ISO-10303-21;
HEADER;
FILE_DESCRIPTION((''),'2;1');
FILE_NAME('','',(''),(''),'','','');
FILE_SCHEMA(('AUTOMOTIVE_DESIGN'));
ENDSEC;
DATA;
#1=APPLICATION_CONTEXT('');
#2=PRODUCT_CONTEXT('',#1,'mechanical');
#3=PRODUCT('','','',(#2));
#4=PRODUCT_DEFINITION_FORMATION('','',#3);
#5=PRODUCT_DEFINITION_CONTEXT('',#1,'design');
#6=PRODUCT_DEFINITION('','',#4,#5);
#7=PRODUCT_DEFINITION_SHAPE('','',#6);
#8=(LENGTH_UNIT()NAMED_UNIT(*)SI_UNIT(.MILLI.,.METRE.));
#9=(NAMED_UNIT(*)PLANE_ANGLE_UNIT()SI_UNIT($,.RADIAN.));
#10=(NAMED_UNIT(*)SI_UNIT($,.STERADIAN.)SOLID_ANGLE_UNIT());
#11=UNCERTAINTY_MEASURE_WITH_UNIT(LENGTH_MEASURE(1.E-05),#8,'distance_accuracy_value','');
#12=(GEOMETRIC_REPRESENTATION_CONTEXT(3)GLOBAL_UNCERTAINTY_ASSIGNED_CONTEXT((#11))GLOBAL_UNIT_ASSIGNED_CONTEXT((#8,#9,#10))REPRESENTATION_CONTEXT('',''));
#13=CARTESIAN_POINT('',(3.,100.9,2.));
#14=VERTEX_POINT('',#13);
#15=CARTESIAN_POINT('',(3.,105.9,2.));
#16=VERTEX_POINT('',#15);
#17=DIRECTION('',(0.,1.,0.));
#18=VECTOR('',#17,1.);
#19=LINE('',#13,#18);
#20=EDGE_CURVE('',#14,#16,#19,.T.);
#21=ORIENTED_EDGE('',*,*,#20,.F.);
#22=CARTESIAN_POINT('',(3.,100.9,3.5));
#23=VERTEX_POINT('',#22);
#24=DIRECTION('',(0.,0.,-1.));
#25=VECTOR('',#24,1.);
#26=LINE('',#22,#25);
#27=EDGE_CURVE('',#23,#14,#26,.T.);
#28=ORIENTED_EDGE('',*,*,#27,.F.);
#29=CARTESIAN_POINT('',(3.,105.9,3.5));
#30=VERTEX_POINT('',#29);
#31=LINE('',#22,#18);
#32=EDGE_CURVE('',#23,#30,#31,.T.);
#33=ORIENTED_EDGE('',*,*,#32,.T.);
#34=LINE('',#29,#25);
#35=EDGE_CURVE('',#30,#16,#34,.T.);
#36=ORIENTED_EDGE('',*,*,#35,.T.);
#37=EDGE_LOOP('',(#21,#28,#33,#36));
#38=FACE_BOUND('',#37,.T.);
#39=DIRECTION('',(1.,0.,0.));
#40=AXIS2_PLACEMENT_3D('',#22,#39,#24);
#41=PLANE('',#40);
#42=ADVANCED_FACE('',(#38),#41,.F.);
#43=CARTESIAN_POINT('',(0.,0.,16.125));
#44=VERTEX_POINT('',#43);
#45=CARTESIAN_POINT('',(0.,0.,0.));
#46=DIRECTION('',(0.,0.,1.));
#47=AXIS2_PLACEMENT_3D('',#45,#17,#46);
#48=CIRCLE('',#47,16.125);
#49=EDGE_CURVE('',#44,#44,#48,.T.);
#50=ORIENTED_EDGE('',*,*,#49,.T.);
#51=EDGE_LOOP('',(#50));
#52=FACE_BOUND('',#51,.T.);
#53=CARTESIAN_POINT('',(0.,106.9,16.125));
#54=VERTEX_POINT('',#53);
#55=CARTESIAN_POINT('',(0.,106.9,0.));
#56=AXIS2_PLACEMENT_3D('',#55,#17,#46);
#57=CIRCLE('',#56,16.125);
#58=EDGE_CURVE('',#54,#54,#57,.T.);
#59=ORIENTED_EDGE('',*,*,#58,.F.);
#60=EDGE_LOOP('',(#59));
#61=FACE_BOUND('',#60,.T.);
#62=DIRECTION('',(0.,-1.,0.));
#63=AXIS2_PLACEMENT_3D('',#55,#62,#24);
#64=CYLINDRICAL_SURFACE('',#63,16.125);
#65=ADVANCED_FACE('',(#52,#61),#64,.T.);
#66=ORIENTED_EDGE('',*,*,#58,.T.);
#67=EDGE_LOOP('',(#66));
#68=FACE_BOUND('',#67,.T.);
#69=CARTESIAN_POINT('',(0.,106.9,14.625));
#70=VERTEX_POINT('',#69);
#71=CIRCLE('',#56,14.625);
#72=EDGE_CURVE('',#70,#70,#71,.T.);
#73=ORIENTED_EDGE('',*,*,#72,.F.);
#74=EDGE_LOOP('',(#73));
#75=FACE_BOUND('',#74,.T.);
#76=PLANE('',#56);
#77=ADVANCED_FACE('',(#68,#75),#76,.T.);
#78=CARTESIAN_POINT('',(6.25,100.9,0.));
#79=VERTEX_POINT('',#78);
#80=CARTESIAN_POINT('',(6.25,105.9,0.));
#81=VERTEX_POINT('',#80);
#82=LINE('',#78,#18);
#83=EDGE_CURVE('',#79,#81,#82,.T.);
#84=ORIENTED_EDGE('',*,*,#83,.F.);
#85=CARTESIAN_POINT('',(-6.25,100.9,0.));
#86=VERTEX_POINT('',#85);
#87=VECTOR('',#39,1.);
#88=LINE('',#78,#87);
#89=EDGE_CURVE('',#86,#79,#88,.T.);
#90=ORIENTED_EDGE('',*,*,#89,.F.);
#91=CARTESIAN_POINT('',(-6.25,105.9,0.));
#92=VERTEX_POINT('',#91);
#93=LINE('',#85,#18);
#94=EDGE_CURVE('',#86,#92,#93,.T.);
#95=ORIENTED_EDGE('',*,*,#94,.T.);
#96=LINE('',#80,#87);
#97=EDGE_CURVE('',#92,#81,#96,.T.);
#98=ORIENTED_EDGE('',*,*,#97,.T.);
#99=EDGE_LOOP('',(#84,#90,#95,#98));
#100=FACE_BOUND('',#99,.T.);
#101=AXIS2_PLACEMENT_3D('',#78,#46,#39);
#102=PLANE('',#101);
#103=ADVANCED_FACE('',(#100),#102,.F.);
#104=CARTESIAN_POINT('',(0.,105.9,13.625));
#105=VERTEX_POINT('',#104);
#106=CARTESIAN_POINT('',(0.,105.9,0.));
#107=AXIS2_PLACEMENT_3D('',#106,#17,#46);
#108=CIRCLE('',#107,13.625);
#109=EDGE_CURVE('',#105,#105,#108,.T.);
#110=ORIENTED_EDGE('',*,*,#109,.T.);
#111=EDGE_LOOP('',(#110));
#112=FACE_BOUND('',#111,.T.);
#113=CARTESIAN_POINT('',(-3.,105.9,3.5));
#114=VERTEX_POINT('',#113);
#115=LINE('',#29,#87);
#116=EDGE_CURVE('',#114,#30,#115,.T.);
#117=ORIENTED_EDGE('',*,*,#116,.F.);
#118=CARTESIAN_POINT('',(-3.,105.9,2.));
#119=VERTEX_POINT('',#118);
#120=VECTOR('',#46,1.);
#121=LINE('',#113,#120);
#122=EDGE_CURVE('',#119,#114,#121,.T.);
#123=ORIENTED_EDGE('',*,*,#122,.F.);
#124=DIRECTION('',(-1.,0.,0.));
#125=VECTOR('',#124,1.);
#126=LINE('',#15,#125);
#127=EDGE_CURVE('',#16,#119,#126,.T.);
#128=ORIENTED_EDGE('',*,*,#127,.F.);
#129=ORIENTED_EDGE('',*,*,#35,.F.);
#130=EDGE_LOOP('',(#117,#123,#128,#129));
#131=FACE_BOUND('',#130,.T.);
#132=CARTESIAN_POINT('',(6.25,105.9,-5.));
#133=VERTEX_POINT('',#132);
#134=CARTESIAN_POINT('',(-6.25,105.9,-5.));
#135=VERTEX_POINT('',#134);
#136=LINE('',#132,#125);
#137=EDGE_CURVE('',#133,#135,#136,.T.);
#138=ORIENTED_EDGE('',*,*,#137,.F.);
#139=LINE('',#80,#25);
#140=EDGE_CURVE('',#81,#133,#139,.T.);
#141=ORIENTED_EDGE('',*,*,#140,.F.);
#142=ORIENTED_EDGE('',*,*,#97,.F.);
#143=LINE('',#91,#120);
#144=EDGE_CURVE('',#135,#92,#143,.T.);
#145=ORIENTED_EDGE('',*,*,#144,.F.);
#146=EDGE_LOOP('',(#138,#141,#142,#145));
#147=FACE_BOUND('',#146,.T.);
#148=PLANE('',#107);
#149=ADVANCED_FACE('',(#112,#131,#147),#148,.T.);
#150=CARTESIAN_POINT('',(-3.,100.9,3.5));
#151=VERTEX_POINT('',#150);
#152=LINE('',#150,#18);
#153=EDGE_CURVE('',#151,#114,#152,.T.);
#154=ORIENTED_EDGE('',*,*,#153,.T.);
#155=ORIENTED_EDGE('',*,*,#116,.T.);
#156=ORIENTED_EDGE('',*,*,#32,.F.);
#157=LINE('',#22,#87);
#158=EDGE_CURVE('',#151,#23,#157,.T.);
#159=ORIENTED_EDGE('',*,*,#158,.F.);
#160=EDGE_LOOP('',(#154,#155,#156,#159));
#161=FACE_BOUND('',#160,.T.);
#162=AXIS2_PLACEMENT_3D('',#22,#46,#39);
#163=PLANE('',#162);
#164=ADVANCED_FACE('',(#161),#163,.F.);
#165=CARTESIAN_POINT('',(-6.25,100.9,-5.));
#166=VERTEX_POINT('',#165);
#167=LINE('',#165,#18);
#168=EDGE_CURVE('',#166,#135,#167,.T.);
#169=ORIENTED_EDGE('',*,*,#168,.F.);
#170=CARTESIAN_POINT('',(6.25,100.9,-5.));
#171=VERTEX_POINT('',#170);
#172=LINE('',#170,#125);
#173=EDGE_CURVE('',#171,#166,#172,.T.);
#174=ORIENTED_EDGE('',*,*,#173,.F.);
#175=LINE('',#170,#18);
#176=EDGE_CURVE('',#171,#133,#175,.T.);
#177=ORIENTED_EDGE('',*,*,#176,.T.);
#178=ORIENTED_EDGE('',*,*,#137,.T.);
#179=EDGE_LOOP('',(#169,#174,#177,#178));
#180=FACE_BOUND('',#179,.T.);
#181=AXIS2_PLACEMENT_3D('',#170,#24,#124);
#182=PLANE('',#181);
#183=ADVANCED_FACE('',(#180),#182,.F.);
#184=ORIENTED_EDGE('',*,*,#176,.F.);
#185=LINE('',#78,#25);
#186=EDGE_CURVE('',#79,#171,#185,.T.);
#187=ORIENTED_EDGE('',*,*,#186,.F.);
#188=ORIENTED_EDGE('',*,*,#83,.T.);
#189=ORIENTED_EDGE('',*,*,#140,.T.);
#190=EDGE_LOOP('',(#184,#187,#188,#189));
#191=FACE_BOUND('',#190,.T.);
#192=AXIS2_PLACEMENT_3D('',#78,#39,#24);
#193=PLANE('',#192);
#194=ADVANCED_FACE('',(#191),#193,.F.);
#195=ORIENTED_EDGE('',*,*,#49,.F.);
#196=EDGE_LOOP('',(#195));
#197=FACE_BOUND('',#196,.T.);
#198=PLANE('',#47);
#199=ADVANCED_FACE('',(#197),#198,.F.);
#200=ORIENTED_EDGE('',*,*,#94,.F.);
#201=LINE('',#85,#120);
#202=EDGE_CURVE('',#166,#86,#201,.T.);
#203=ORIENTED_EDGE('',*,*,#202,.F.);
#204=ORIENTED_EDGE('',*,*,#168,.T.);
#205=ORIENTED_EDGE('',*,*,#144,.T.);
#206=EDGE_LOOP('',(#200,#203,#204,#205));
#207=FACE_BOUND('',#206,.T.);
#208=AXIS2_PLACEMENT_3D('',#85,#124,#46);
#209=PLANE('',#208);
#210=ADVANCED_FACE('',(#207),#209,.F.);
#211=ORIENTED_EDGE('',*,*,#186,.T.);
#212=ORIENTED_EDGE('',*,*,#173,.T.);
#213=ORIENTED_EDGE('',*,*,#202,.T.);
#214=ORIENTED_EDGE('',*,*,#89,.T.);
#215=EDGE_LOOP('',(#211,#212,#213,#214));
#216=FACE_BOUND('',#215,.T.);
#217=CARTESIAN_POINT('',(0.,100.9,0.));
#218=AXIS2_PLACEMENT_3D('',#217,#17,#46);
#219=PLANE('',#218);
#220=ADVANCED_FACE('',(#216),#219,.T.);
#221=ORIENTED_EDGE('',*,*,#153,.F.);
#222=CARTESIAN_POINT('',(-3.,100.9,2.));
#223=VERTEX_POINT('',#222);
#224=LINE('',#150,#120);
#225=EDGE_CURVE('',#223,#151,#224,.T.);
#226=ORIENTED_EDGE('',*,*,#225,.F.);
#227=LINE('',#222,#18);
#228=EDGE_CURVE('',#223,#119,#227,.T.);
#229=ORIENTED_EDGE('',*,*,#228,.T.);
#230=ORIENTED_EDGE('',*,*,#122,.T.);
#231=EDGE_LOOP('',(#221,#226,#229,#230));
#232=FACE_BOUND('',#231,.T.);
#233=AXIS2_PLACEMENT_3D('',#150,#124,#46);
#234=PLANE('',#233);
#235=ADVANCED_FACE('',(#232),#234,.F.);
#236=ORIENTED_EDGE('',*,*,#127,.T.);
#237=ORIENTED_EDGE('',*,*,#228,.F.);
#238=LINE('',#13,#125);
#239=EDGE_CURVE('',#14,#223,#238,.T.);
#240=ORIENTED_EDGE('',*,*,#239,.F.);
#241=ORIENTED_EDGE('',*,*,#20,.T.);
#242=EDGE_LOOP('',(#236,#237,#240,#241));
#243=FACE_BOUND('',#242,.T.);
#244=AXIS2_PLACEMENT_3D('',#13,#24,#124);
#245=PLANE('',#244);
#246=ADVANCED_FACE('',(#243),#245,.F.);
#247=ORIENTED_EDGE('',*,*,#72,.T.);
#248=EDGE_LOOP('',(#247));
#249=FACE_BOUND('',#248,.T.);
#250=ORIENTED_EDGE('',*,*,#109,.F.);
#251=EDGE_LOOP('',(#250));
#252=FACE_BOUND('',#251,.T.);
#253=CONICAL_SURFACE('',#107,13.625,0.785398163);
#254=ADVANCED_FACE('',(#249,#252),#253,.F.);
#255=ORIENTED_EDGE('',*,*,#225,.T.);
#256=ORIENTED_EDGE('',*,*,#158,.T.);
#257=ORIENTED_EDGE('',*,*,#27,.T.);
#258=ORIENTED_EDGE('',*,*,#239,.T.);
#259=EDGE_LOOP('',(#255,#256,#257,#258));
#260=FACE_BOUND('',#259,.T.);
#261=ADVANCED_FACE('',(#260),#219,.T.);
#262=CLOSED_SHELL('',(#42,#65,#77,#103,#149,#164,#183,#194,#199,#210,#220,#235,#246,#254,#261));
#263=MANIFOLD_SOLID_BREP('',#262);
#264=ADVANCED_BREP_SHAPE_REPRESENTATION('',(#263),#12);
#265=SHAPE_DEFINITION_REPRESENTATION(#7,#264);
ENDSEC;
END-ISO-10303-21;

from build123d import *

# Parameters (mm, degrees)
SKETCH1_R           = 16.125
BOSS_EXTRUDE1_DEPTH = 106.9
SKETCH2_R           = 14.625
CUT_EXTRUDE1_DEPTH  = 1
CHAMFER1_SIZE       = 1
SKETCH3_W           = 12.5
SKETCH3_H           = 5
SKETCH3_W_2         = 6
SKETCH3_H_2         = 1.5
CUT_EXTRUDE2_DEPTH  = 5


with BuildPart() as part:
    # Sketch1 → Boss-Extrude1 (new body)
    with BuildSketch(Plane(origin=(0, 0, 0), x_dir=(1, 0, 0), z_dir=(0, 1, 0))):
        with Locations(Location((0, 0, 0), (0, 0, 270))):
            Circle(SKETCH1_R)
    extrude(amount=BOSS_EXTRUDE1_DEPTH)

    # Sketch2 → Cut-Extrude1 (cut)
    with BuildSketch(Plane(origin=(0, 106.9, 0), x_dir=(1, 0, 0), z_dir=(0, 1, 0))):
        with Locations(Location((0, 0, 0), (0, 0, 270))):
            Circle(SKETCH2_R)
    extrude(amount=-CUT_EXTRUDE1_DEPTH, mode=Mode.SUBTRACT)

    # Chamfer1
    chamfer1_edges = [part.edges().sort_by_distance(p)[0] for p in [
        (0, 105.9, -14.625),
    ]]
    chamfer(chamfer1_edges, length=CHAMFER1_SIZE - 0.0001)  # a hair under: the kernel refuses the full size

    # Sketch3 → Cut-Extrude2 (cut)
    with BuildSketch(Plane(origin=(0, 105.9, 0), x_dir=(1, 0, 0), z_dir=(0, 1, 0))):
        with Locations((0, 2.5)):
            Rectangle(SKETCH3_W, SKETCH3_H)
        with Locations((0, -2.75)):
            Rectangle(SKETCH3_W_2, SKETCH3_H_2)
    extrude(amount=-CUT_EXTRUDE2_DEPTH, mode=Mode.SUBTRACT)


solid = part.part
